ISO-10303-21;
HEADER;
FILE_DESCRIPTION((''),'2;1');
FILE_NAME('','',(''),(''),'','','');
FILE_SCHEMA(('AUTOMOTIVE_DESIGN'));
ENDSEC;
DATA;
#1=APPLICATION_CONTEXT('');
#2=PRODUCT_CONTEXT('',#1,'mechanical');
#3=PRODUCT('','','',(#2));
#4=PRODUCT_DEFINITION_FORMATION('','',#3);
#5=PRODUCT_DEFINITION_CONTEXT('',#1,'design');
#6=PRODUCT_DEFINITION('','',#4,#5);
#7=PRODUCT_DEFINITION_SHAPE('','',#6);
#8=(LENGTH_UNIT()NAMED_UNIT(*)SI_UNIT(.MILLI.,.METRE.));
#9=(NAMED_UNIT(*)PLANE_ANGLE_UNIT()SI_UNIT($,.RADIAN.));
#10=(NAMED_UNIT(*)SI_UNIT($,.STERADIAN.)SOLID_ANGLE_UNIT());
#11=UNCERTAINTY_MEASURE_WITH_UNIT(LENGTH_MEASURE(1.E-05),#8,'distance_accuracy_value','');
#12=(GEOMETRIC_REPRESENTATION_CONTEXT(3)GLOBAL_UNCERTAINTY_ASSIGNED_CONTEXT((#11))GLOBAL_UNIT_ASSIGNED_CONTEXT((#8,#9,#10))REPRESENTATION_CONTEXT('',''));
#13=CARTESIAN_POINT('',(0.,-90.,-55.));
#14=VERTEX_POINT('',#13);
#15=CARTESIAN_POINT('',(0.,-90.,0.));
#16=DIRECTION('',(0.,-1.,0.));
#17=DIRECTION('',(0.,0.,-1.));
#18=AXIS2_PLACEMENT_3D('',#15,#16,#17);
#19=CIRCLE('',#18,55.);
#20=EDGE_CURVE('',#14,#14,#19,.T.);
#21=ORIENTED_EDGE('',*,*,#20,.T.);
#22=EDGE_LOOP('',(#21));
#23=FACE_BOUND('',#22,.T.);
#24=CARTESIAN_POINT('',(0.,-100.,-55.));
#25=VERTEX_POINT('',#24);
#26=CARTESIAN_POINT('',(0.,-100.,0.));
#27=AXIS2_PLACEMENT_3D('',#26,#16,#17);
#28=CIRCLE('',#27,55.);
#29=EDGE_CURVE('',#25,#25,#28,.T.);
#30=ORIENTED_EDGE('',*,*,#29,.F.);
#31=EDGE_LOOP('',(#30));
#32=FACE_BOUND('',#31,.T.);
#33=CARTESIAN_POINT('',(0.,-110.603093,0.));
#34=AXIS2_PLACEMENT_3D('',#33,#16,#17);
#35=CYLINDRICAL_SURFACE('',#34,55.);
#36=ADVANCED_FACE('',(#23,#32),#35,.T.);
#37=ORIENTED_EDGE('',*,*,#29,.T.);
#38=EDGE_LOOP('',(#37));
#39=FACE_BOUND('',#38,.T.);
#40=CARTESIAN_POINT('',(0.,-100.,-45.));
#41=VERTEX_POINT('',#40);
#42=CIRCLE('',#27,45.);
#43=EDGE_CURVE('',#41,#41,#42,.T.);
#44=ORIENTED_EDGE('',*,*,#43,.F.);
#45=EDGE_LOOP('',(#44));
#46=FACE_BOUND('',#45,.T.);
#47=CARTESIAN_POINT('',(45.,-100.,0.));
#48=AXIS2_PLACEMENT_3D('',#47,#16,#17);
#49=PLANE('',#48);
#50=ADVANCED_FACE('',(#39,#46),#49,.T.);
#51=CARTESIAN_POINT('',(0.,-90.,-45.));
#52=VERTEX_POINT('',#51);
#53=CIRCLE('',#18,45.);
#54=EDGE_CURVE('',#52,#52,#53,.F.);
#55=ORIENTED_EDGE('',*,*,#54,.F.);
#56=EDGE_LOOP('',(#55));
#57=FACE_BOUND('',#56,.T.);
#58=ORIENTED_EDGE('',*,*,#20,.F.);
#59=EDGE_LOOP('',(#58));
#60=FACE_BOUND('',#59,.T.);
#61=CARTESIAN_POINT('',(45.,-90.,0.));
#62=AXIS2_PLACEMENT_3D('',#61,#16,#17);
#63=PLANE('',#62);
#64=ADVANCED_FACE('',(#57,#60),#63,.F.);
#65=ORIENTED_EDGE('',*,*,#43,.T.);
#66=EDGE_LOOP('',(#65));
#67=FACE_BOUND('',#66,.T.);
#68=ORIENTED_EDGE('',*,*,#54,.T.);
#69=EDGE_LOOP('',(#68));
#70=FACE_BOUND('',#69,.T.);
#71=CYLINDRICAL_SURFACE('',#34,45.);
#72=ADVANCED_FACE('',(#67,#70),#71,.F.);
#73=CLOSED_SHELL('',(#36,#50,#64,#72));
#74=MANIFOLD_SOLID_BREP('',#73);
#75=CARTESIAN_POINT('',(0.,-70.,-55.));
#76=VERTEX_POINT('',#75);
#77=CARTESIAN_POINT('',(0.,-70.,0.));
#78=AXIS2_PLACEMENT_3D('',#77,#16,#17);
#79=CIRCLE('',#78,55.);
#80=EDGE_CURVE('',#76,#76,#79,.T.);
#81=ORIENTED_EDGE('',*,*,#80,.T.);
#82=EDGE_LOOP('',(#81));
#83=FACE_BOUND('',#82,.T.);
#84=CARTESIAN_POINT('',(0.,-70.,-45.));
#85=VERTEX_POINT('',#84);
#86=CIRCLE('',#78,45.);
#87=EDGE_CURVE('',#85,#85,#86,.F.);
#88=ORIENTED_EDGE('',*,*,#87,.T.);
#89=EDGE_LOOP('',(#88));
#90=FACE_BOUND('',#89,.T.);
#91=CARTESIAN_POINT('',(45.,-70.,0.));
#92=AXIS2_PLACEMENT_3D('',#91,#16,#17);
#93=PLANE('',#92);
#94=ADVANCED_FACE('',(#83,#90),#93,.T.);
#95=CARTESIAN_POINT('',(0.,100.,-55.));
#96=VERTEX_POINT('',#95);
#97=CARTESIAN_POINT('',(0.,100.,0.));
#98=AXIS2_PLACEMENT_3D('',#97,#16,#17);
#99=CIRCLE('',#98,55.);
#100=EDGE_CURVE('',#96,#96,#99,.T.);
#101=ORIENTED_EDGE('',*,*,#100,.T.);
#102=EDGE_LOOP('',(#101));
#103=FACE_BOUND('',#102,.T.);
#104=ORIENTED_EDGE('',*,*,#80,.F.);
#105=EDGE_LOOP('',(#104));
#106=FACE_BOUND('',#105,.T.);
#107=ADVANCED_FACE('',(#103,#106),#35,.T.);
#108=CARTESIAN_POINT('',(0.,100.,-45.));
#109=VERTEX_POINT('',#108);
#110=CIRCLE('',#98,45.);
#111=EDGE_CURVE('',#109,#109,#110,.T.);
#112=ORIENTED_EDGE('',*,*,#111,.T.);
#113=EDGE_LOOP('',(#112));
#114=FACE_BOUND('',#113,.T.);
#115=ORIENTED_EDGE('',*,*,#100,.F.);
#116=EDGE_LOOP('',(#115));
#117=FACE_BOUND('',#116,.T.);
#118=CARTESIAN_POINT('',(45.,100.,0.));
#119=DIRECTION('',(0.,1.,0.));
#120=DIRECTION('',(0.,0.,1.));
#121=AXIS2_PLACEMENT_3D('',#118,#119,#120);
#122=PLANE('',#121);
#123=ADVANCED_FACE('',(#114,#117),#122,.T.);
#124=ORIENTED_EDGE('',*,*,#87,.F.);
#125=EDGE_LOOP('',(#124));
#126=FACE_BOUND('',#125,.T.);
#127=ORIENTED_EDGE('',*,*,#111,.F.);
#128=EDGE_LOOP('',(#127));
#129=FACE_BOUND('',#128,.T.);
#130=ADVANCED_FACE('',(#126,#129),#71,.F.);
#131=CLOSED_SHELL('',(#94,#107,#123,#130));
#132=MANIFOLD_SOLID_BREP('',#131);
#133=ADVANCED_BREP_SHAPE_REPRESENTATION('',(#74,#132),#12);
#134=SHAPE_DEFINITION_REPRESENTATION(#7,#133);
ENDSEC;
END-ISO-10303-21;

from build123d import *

# Parameters (mm, degrees)
SKETCH_1_W            = 10
SKETCH_1_H            = 200
THICKEN_START         = -90
THICKEN_1_OUTLINE_R   = 55
THICKEN_1_OUTLINE_R_2 = 45
THICKEN_1_DEPTH       = 20


# Read off the part's stored shape, not the designer's step: Вырез-Придать толщину1
with BuildPart() as part:
    # Эскиз1 → Повернуть1 (revolve)
    with BuildSketch(Plane.XY, mode=Mode.PRIVATE) as revolve_1_sk:
        with Locations((50, 0)):
            Rectangle(SKETCH_1_W, SKETCH_1_H)
    revolve(revolve_1_sk.sketch.rotate(Axis((0, -110.603092707, 0), (0, 1, 0)), 90), axis=Axis((0, -110.603092707, 0), (0, 1, 0)))

    # Вырез-Придать толщину1 outline → Вырез-Придать толщину1 (cut)
    with BuildSketch(Plane(origin=(0, 0, 0), x_dir=(1, 0, 0), z_dir=(0, 1, 0)).offset(THICKEN_START)):
        Circle(THICKEN_1_OUTLINE_R)
        Circle(THICKEN_1_OUTLINE_R_2, mode=Mode.SUBTRACT)
    extrude(amount=THICKEN_1_DEPTH, mode=Mode.SUBTRACT)


solid = part.part
